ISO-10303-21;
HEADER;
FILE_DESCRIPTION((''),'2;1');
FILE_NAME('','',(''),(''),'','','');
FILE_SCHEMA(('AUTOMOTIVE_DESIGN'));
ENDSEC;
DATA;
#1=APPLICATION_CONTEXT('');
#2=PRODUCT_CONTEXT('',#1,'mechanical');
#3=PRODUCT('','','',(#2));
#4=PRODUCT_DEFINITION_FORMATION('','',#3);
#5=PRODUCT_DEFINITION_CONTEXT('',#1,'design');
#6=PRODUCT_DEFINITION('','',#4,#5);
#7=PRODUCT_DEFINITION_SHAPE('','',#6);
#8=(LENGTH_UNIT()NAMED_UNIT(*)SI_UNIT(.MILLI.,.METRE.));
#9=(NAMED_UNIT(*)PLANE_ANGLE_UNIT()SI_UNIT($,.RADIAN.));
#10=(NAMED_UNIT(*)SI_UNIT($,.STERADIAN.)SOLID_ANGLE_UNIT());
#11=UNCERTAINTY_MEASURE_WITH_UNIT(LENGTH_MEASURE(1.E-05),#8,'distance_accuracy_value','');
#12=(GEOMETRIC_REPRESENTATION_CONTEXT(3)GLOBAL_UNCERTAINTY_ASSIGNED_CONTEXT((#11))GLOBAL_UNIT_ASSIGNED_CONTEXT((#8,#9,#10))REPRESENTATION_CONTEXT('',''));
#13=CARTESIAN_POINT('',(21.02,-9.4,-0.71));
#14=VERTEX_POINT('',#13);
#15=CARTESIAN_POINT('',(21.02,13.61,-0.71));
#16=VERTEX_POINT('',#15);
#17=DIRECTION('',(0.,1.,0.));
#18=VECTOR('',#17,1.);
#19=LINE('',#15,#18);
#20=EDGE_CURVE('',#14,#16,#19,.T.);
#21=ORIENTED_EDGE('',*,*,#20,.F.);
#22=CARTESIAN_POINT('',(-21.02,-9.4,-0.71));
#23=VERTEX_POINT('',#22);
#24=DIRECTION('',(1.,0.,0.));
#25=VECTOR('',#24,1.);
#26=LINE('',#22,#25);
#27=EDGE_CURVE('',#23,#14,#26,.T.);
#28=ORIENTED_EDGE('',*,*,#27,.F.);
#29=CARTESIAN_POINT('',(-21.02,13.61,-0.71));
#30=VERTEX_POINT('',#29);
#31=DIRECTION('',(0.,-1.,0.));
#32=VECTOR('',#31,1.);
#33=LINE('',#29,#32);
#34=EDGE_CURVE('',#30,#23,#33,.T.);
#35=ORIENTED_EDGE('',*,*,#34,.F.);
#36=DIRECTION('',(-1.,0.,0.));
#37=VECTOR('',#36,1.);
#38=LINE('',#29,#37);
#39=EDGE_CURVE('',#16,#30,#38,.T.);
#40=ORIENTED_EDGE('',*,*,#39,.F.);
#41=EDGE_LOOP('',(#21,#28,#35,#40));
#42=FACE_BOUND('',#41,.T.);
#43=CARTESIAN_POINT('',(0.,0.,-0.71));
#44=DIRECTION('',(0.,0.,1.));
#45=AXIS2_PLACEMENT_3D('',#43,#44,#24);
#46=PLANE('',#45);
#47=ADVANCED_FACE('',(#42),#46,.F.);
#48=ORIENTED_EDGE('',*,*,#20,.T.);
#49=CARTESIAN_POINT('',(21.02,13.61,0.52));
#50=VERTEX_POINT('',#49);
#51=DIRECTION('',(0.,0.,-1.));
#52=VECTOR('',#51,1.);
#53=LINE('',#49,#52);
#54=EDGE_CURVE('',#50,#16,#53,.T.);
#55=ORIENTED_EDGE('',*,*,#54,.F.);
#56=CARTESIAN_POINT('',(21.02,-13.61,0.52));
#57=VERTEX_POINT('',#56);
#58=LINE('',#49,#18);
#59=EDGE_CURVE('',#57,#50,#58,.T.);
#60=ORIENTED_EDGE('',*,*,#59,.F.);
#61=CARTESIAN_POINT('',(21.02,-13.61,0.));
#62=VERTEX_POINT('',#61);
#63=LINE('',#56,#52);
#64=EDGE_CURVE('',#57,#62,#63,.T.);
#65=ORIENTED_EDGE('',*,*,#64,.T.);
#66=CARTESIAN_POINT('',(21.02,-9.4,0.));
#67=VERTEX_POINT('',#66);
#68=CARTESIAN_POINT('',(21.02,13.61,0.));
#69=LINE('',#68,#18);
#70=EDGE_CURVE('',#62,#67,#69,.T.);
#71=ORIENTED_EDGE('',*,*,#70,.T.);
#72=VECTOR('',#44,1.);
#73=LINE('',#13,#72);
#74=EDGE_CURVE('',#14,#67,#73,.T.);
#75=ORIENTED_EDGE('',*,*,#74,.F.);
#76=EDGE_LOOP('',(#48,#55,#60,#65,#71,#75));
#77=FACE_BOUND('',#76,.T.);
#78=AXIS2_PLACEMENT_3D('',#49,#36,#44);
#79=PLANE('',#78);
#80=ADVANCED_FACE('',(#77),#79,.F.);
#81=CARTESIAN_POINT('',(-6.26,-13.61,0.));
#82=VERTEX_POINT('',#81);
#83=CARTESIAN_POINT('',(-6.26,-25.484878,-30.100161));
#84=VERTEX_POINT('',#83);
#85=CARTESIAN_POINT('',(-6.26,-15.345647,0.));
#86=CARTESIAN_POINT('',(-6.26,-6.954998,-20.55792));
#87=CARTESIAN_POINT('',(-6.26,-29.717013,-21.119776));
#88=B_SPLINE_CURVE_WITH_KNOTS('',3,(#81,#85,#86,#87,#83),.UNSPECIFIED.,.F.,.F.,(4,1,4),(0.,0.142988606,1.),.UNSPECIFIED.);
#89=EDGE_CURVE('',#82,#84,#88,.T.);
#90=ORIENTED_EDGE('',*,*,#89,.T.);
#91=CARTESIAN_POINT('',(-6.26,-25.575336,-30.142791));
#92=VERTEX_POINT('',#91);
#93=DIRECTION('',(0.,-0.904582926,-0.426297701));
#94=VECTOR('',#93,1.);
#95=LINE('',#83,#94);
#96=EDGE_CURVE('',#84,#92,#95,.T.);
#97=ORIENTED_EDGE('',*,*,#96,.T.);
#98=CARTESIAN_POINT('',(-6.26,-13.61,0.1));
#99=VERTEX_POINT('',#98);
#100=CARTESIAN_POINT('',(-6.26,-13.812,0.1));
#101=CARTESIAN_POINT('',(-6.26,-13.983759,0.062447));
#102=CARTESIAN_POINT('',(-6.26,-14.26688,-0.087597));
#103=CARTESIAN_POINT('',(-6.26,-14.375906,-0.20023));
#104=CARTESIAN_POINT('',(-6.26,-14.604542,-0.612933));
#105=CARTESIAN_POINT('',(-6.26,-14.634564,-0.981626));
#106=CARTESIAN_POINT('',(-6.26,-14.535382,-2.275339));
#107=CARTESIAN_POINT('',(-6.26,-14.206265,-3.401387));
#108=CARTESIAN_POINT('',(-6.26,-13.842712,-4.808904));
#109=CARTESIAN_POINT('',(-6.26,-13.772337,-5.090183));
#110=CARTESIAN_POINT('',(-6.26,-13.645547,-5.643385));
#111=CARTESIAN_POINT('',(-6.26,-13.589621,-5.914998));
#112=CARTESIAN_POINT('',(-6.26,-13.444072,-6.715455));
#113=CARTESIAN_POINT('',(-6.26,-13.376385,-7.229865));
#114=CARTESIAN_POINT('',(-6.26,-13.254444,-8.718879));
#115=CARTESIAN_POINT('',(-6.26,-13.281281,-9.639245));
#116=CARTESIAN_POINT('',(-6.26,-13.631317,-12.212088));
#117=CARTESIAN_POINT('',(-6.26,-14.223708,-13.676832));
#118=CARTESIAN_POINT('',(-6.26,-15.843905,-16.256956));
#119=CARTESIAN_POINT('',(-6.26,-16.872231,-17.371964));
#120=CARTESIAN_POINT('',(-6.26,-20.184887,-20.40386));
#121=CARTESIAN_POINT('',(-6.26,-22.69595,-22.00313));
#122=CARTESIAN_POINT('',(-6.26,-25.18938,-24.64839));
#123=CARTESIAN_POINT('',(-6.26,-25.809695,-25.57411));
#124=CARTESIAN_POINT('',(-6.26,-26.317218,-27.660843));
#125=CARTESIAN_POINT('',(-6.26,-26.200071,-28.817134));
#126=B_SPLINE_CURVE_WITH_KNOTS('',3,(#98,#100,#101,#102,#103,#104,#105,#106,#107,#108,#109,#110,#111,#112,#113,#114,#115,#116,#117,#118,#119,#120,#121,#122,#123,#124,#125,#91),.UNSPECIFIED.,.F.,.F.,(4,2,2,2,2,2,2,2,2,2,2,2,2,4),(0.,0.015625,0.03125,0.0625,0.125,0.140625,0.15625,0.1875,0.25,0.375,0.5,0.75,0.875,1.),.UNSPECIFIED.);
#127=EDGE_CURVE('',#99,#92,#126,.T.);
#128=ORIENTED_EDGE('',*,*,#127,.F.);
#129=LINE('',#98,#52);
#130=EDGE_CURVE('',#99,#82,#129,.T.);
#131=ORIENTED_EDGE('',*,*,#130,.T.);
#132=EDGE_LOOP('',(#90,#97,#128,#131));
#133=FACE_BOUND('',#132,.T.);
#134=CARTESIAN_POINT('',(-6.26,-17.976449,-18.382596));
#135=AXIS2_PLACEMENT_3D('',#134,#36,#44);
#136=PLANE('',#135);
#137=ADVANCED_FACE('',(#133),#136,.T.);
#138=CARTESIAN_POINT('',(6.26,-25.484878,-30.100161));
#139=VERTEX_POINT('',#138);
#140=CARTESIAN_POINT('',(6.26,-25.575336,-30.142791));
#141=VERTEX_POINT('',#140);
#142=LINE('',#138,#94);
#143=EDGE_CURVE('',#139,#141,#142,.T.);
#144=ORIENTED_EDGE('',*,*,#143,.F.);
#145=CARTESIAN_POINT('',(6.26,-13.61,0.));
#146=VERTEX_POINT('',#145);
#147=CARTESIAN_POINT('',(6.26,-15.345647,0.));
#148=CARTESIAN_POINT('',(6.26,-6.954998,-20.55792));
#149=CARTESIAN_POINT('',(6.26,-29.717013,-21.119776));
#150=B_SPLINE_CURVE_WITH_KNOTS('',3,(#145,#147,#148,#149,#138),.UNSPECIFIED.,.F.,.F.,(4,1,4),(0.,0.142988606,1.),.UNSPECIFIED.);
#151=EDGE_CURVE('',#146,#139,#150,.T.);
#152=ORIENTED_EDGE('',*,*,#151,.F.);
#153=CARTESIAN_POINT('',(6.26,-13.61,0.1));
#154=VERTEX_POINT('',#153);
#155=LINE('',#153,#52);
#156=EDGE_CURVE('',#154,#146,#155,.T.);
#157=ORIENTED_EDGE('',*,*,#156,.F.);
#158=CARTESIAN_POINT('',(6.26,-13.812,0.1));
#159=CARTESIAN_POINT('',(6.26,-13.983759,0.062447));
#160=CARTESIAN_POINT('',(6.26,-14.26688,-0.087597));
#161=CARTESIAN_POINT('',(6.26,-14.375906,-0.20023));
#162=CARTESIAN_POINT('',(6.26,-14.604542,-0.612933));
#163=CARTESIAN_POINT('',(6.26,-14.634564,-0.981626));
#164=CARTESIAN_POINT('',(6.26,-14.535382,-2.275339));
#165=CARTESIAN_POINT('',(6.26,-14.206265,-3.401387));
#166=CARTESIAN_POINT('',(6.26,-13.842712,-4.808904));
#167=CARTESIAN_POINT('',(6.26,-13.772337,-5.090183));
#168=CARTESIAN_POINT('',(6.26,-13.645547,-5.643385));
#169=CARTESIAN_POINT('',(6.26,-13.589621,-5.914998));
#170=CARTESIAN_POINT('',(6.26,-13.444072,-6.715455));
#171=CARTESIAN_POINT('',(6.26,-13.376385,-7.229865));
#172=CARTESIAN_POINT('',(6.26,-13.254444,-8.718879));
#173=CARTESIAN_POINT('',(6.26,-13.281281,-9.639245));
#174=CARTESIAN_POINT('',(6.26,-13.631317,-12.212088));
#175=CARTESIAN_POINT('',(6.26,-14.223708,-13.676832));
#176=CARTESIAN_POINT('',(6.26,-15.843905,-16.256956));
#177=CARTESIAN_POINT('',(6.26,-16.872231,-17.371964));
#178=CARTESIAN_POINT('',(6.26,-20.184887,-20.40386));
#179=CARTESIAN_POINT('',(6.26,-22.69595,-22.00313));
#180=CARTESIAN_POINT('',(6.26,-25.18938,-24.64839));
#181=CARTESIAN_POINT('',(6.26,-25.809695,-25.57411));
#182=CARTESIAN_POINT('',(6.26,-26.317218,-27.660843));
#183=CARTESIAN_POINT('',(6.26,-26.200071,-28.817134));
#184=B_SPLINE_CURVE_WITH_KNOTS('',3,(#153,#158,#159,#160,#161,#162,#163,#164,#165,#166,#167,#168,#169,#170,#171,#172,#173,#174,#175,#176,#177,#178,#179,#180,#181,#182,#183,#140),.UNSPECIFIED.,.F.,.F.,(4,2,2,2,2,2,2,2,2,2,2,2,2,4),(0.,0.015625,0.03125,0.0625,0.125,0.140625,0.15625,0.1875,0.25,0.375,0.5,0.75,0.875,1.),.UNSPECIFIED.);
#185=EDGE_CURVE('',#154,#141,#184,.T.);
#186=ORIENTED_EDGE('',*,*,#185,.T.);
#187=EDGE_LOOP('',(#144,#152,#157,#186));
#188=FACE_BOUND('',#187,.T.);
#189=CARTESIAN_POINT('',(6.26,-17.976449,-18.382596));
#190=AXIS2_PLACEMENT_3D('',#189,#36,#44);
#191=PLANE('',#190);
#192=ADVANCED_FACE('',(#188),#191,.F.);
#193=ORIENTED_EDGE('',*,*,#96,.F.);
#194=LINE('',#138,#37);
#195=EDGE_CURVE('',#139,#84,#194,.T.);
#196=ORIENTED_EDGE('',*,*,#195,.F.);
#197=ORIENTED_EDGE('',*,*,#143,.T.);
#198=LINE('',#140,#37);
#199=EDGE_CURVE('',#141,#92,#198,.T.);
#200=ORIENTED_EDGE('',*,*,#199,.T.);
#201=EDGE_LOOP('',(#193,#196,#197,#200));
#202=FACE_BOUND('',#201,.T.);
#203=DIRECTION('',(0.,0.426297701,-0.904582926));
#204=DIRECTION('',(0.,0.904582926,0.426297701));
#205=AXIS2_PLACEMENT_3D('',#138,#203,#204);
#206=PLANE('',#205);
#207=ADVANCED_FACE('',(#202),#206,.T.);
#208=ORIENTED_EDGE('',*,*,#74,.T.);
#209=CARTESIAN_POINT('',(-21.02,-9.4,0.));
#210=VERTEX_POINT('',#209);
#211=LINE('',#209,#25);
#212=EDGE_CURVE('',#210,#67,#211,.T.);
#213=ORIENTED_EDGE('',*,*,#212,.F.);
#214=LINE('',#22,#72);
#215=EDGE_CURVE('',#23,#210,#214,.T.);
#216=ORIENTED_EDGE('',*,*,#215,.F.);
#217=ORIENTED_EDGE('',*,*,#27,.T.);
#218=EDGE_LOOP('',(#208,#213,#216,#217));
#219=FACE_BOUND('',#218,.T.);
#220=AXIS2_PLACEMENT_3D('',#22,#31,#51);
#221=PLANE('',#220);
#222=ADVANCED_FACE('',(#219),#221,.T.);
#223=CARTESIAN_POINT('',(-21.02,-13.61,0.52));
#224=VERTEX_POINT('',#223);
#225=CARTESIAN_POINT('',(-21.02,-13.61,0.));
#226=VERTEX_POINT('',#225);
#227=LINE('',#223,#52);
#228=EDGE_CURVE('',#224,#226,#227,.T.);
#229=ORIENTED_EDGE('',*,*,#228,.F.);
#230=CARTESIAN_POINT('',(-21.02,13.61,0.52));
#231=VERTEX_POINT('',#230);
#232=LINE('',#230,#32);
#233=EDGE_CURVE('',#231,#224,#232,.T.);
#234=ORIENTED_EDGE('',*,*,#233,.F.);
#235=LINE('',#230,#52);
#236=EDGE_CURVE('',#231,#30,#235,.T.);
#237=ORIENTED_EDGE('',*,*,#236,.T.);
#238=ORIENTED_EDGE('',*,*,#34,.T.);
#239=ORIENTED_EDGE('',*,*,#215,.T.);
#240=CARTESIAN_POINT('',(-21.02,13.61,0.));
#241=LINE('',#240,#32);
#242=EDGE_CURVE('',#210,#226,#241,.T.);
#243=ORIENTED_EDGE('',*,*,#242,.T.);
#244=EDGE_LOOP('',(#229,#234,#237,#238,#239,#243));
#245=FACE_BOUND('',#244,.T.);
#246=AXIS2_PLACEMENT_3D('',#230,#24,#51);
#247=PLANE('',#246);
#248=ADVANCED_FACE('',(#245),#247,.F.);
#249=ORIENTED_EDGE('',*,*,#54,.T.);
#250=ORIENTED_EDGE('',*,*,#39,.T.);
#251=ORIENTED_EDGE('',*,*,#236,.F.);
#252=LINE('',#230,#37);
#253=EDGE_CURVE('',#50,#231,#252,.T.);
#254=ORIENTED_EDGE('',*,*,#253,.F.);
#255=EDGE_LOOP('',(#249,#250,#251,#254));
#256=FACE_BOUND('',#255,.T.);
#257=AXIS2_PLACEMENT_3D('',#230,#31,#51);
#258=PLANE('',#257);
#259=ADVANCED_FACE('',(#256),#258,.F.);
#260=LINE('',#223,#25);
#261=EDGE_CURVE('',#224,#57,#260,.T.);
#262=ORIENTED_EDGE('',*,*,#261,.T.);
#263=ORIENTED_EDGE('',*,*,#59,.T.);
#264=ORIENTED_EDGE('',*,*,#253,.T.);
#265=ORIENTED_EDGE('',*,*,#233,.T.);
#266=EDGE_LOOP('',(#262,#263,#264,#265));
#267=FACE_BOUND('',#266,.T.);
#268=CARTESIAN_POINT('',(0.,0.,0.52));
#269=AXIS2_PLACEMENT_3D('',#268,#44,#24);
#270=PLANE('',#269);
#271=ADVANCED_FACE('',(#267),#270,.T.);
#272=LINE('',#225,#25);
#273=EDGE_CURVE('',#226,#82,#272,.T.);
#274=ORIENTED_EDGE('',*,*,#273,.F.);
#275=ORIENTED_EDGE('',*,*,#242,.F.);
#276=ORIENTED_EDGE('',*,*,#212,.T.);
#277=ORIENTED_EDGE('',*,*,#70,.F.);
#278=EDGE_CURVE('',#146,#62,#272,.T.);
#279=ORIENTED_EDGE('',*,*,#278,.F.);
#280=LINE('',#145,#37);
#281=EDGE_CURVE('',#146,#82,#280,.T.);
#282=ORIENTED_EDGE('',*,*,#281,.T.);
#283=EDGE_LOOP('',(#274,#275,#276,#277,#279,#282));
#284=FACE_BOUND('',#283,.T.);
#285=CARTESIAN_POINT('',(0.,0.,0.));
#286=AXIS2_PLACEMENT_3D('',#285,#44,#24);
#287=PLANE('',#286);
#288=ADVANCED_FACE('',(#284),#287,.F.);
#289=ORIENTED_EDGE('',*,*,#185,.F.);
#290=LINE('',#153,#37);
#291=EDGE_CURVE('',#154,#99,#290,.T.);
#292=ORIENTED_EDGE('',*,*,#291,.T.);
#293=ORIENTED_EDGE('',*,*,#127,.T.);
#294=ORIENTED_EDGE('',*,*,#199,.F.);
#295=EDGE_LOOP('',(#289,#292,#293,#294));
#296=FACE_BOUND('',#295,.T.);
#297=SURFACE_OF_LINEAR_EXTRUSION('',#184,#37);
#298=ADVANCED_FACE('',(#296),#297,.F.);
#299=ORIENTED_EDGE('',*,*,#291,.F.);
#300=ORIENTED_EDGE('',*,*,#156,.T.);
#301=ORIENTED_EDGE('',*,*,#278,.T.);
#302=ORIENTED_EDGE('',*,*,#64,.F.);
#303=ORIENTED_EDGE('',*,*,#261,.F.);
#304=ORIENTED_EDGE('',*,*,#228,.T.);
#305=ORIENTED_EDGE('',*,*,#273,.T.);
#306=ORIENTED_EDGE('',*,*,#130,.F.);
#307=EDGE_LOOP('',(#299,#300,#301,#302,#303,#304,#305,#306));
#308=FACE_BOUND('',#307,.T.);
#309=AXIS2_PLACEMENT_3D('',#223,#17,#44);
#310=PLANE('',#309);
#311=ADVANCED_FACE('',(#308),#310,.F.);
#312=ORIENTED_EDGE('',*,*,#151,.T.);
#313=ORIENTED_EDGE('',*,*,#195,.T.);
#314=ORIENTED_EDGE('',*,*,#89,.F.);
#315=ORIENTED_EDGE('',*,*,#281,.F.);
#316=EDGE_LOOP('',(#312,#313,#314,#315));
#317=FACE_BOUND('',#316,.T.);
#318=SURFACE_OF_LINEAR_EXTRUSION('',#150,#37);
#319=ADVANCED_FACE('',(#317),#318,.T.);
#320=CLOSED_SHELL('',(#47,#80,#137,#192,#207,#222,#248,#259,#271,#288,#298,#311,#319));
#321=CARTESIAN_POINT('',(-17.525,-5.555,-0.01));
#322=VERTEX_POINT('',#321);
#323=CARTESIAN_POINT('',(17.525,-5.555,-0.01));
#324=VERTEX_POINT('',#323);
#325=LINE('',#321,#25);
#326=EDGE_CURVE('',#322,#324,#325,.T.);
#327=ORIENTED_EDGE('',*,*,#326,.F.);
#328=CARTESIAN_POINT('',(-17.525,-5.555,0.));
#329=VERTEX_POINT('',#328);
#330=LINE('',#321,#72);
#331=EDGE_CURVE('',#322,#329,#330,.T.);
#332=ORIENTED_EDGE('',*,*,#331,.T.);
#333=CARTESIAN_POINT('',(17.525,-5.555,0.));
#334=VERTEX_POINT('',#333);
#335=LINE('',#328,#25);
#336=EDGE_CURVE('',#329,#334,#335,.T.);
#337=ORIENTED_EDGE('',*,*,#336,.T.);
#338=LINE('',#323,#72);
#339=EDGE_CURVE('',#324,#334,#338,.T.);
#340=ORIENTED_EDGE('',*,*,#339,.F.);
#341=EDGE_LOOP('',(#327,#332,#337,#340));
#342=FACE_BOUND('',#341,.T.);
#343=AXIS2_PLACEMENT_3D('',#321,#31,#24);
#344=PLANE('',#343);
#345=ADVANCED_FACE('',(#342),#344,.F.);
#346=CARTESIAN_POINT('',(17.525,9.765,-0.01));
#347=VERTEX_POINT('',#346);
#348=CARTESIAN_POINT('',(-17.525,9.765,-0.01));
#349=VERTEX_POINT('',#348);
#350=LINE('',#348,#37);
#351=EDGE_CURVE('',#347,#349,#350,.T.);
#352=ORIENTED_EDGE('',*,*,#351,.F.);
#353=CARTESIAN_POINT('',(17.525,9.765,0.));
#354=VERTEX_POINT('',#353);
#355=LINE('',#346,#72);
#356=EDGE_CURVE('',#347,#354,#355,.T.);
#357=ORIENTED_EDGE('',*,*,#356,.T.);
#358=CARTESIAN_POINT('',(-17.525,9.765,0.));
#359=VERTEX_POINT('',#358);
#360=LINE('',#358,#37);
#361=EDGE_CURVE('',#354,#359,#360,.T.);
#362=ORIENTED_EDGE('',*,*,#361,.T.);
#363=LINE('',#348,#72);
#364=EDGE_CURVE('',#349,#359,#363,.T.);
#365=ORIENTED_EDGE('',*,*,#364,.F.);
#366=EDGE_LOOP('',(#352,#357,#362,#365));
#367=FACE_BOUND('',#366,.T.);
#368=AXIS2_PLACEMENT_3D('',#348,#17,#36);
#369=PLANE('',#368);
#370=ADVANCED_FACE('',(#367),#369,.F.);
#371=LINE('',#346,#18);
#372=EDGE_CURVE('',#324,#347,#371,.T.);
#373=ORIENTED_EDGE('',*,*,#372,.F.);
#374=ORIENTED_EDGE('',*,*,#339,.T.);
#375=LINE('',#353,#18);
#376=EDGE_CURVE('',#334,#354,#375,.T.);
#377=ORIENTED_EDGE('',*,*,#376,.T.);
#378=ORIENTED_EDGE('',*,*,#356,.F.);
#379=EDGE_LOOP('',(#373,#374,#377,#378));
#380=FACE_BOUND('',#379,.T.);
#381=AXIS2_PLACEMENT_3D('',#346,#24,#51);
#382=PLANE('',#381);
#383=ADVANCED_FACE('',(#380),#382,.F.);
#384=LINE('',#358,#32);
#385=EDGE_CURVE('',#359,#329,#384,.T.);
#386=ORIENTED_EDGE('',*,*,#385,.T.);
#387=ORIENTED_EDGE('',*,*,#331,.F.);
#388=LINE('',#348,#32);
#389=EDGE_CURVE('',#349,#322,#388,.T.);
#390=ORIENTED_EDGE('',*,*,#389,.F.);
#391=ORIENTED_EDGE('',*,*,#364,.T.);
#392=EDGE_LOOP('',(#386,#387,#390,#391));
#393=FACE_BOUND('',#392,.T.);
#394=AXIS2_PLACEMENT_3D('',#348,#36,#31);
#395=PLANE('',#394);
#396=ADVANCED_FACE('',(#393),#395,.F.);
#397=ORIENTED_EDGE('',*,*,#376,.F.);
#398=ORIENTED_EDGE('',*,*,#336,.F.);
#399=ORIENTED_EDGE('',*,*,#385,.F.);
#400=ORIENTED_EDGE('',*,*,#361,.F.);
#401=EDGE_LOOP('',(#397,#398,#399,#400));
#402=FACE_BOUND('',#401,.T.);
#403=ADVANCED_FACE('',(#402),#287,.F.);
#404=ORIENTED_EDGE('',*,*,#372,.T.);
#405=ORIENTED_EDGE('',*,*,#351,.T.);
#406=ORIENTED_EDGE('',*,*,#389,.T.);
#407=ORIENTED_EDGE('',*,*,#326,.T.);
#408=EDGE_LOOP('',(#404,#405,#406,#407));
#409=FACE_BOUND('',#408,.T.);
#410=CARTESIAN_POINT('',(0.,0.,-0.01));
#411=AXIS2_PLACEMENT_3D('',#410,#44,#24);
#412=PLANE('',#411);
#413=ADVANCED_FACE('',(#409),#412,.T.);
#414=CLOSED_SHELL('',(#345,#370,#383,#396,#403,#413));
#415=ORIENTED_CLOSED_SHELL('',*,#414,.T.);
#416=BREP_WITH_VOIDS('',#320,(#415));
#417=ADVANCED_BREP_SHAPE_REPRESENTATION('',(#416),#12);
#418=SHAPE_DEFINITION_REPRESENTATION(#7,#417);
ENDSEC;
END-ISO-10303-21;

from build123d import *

# Parameters (mm, degrees)
SKETCH_1_W          = 42.04
SKETCH_1_H          = 27.22
EXTRUDE_1_DEPTH     = 0.52
SKETCH_3_W          = 42.04
SKETCH_3_H          = 23.01
EXTRUDE_2_DEPTH     = 0.71
SKETCH_5_W          = 35.05
SKETCH_5_H          = 15.32
CUT_EXTRUDE_1_DEPTH = 0.01
EXTRUDE_START       = -6.26
EXTRUDE_1_2_DEPTH   = 12.52


# Read off the part's stored shape, not the designer's step: 拉伸-薄壁1
with BuildPart() as part:
    # 草图1 → Extrude 1 (new body)
    with BuildSketch(Plane.XY):
        Rectangle(SKETCH_1_W, SKETCH_1_H)
    extrude(amount=EXTRUDE_1_DEPTH)

    # 草图3 → 凸台-拉伸2 (add)
    with BuildSketch(Plane.XY):
        with Locations((0, 2.105)):
            Rectangle(SKETCH_3_W, SKETCH_3_H)
    extrude(amount=-EXTRUDE_2_DEPTH)

    # 草图5 → 切除-拉伸1 (cut)
    with BuildSketch(Plane.XY):
        with Locations((0, 2.105)):
            Rectangle(SKETCH_5_W, SKETCH_5_H)
    extrude(amount=-CUT_EXTRUDE_1_DEPTH, mode=Mode.SUBTRACT)

    # Extrude 1 2 outline → Extrude 1 2 (add)
    with BuildSketch(Plane(origin=(0, 0, 0), x_dir=(0, 0, -1), z_dir=(1, 0, 0)).offset(EXTRUDE_START)):
        with BuildLine():
            Line((0, -13.61), (-0.1, -13.61))
            add(Edge.make_bspline(
                [(-0.1, -13.61), (-0.1, -13.811999948), (-0.062447397, -13.983759134), (0.087597414, -14.266880112), (0.200229868, -14.375905512), (0.61293299, -14.604541747), (0.98162629, -14.634564325), (2.275338874, -14.53538179), (3.401387146, -14.206264697), (4.808904257, -13.842712132), (5.090182683, -13.77233657), (5.643385338, -13.645546605), (5.91499808, -13.589621122), (6.715455086, -13.444072044), (7.229865116, -13.376385405), (8.718879461, -13.254443705), (9.639245367, -13.281281386), (12.212088444, -13.631316764), (13.676832265, -14.22370802), (16.256955878, -15.84390487), (17.371964057, -16.872230984), (20.403860489, -20.184886502), (22.003130479, -22.695949544), (24.648389829, -25.189380489), (25.574110216, -25.809694734), (27.660843497, -26.317217871), (28.817134045, -26.200070844), (30.142790661, -25.575336117)],
                knots=[0, 0, 0, 0, 0.015625, 0.015625, 0.03125, 0.03125, 0.0625, 0.0625, 0.125, 0.125, 0.140625, 0.140625, 0.15625, 0.15625, 0.1875, 0.1875, 0.25, 0.25, 0.375, 0.375, 0.5, 0.5, 0.75, 0.75, 0.875, 0.875, 1, 1, 1, 1], degree=3))
            Line((30.142790661, -25.575336117), (30.100160891, -25.484877824))
            add(Edge.make_bspline(
                [(0, -13.61), (0, -15.345647415), (20.557920243, -6.954998075), (21.119775691, -29.717013379), (30.100160891, -25.484877824)],
                knots=[0, 0, 0, 0, 0.142988606, 1, 1, 1, 1], degree=3))
        make_face()
    extrude(amount=EXTRUDE_1_2_DEPTH)


solid = part.part
